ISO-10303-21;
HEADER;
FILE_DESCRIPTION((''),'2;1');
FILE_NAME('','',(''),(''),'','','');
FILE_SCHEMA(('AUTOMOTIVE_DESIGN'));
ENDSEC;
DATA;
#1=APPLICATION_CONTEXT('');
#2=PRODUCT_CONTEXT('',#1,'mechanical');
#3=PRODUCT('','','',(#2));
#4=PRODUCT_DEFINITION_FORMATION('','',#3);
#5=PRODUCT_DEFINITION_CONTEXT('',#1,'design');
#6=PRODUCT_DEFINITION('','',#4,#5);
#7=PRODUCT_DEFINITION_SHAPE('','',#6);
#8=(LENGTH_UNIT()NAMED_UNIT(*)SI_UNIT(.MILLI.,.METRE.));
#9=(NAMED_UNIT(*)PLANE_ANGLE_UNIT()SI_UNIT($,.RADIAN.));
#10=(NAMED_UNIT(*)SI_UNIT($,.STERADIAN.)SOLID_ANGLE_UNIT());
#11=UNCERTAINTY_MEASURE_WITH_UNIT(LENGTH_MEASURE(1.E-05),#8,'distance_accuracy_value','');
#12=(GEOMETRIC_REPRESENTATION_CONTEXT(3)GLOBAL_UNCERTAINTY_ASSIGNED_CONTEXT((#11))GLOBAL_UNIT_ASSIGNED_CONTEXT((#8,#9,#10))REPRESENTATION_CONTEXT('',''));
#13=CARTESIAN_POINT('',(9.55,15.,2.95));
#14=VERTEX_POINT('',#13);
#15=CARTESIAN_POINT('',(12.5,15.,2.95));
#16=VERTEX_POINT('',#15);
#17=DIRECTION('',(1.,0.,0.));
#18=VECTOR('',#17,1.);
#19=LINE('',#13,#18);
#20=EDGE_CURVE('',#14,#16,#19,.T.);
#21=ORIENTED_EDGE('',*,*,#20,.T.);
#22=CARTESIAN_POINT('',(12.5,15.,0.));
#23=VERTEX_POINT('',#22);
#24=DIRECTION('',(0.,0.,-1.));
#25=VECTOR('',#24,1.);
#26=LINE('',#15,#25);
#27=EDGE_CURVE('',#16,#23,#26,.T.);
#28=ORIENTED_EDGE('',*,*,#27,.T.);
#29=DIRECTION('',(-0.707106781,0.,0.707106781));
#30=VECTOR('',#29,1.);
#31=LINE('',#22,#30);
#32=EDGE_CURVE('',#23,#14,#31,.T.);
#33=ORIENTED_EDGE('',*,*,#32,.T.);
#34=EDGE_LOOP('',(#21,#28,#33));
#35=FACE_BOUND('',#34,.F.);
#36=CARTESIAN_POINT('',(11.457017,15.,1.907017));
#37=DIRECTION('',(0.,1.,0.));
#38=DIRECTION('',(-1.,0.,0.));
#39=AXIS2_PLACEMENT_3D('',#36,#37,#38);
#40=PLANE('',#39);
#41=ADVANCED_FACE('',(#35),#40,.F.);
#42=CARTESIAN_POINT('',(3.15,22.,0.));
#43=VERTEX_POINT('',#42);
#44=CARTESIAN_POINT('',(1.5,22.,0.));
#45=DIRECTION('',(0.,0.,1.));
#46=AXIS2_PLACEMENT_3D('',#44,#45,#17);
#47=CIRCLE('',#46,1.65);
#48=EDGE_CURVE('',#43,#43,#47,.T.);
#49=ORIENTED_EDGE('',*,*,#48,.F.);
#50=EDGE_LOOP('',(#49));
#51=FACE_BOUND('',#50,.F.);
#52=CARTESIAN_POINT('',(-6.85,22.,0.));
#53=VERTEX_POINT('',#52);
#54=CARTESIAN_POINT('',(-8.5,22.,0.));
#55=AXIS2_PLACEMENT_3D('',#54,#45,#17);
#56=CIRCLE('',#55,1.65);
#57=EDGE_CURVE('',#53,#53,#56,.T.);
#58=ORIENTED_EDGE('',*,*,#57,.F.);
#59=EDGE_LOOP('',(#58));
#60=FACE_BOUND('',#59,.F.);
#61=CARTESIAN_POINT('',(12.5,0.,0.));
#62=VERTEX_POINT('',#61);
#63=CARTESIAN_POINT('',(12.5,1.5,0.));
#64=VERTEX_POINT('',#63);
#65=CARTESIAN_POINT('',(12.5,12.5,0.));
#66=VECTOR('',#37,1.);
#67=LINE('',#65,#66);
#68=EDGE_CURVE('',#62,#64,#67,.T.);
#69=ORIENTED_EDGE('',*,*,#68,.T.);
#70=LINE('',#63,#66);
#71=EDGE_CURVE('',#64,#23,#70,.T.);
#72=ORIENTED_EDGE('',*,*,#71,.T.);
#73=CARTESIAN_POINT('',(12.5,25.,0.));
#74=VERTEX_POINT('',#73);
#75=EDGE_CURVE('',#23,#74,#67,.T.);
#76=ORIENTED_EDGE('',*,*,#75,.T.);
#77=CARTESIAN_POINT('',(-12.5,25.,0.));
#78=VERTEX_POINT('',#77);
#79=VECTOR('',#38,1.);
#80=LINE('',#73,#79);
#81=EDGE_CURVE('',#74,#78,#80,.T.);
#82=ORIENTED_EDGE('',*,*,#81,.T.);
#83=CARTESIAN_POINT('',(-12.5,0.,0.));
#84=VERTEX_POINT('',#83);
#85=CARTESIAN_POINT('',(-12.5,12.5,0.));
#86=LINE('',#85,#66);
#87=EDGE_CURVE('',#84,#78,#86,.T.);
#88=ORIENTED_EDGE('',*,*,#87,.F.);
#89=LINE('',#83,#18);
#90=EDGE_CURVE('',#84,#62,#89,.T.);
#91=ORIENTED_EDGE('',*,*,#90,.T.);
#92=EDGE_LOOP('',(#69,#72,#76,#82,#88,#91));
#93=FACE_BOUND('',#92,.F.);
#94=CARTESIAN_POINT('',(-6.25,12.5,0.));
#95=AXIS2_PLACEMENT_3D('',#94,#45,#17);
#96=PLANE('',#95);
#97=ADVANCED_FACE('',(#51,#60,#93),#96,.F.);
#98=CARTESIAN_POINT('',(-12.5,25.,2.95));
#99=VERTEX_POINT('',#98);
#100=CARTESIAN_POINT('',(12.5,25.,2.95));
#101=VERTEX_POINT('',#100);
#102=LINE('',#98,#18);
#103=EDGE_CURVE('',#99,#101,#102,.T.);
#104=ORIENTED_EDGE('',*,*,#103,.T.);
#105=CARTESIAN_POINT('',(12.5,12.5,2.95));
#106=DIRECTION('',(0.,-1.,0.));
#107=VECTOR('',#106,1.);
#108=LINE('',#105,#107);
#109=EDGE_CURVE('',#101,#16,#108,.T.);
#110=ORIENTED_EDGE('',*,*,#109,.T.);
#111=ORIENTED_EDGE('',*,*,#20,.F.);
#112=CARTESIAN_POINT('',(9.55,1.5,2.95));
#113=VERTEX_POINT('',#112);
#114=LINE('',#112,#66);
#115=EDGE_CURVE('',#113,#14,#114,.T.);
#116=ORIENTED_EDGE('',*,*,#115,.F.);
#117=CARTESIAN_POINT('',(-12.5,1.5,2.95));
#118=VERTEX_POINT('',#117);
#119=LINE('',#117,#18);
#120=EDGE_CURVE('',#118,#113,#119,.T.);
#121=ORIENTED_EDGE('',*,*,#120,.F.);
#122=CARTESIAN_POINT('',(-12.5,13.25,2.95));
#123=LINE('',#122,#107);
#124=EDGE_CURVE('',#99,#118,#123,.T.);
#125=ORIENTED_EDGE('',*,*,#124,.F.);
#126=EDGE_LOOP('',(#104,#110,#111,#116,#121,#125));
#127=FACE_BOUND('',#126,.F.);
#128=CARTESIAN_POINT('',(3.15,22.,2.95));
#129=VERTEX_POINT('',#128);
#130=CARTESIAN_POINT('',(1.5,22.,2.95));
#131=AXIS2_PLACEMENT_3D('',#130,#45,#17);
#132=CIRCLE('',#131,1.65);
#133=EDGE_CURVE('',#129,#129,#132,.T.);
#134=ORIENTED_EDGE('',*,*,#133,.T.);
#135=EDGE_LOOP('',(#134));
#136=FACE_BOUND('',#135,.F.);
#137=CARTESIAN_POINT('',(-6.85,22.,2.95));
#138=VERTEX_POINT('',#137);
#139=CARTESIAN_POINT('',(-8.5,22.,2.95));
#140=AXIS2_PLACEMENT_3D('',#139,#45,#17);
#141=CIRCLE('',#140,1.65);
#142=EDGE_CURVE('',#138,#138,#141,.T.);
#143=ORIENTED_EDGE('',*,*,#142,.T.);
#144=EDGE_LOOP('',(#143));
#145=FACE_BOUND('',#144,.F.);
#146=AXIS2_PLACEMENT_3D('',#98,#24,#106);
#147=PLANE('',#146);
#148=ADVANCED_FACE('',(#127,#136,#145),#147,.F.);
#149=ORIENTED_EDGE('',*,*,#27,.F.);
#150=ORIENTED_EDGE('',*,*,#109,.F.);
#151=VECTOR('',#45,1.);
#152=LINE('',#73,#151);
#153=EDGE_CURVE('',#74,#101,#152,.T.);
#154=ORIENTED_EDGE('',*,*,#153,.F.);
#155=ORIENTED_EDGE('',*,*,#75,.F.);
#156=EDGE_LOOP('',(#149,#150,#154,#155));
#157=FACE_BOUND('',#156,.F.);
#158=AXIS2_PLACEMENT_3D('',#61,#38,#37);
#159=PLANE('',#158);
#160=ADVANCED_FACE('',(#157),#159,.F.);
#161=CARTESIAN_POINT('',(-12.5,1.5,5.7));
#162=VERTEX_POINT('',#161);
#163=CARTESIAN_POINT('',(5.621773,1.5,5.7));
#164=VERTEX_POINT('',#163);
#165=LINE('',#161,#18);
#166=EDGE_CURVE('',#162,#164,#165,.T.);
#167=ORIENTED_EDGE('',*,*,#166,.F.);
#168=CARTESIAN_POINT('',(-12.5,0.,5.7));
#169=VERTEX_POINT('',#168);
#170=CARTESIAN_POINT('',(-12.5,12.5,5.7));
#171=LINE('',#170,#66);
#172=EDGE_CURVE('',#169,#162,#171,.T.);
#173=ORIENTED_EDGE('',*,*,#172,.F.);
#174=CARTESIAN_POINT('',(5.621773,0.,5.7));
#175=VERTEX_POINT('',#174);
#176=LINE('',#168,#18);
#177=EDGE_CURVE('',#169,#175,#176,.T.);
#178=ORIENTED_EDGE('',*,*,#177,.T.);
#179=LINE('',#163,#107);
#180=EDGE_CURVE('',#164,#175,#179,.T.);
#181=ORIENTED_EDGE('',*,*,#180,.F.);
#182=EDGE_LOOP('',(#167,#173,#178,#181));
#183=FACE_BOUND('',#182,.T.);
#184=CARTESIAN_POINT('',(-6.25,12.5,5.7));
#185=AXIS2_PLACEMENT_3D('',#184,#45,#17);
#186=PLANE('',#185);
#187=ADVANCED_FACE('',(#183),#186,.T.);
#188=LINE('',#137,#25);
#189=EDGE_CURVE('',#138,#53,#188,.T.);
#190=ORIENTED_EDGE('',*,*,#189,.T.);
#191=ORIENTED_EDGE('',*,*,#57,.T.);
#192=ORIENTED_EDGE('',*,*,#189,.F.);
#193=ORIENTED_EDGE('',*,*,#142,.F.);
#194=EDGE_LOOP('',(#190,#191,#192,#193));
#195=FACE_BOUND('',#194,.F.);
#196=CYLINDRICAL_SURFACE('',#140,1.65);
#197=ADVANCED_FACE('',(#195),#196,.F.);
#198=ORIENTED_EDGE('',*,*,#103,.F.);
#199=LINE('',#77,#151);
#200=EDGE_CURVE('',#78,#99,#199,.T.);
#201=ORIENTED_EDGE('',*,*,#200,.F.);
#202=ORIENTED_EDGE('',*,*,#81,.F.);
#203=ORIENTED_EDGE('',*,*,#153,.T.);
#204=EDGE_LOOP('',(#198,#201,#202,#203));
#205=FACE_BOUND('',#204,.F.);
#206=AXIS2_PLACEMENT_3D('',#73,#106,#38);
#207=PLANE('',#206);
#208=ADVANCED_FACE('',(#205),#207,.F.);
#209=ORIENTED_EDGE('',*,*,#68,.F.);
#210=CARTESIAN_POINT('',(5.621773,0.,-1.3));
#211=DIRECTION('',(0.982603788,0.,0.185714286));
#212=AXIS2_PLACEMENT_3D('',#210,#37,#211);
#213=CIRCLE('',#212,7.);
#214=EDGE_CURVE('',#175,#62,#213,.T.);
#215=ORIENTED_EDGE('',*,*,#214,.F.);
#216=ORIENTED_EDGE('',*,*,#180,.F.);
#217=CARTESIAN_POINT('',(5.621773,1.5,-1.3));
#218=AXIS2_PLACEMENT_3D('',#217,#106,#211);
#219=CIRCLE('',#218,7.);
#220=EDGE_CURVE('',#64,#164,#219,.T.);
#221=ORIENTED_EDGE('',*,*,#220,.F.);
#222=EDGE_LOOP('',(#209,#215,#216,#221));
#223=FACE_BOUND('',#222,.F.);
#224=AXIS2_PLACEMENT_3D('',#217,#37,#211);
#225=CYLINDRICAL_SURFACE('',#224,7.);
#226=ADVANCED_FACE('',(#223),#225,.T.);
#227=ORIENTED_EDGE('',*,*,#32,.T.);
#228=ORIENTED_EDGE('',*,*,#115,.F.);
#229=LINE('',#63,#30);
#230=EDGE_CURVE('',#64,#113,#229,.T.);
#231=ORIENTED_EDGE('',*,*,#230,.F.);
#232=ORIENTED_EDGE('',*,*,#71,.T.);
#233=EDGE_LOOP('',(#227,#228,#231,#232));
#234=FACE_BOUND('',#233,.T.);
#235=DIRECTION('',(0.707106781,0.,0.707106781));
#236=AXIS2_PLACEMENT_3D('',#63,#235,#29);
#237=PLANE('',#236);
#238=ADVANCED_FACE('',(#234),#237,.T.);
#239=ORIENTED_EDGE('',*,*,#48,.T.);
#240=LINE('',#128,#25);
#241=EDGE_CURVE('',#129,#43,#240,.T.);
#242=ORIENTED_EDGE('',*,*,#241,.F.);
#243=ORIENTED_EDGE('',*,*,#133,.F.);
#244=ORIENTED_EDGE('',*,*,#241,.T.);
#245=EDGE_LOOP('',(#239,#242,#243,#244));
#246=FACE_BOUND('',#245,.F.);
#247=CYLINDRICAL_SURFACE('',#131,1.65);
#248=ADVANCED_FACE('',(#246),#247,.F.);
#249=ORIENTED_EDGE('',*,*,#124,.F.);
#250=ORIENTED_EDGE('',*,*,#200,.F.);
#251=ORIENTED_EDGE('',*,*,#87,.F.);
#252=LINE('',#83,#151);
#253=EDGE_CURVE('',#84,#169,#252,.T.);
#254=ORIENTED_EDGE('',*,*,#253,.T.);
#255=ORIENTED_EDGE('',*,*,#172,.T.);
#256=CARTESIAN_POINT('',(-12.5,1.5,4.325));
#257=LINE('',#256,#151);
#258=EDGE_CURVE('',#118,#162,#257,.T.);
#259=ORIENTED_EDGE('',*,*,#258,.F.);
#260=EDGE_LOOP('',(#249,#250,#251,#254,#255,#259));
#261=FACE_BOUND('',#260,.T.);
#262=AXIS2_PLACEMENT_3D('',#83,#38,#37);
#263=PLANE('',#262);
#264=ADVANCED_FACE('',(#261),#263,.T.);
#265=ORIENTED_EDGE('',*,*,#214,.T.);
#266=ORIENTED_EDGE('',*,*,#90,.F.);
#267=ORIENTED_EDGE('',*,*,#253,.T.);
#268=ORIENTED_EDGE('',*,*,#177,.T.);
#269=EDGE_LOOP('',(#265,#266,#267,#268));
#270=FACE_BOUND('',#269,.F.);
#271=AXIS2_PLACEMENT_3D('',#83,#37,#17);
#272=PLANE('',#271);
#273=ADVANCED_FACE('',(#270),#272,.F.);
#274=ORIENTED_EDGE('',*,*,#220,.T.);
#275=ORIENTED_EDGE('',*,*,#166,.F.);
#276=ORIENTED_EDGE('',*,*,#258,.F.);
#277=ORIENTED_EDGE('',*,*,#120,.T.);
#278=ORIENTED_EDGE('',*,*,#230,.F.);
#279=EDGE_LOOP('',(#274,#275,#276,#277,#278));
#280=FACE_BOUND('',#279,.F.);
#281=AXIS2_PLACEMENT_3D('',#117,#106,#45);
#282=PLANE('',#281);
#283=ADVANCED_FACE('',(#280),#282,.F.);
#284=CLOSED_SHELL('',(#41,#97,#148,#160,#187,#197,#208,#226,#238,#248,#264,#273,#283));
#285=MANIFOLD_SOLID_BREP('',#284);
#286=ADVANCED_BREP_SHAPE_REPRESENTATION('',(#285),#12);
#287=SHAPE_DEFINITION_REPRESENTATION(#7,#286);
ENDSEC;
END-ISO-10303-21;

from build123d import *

# Parameters (mm, degrees)
F0_W        = 12.5
F0_H        = 25
F1_DEPTH    = 5.7
F2_W        = 23.5
F2_H        = 2.75
F3_DEPTH    = 25.001
F5_DEPTH    = 13.5
F6_T1_DEPTH = 18.695566289
F7_R        = 1.65
F8_DEPTH    = 25


# Not quite as in the source:
# - a fillet or chamfer that OpenCascade refuses, or shapes differently, is made with other operations: its cross-section is extruded or revolved along the edge and cut away or added


with BuildPart() as f1:
    # F0 (on Top) → F1 (new body)
    with BuildSketch(Plane.XY):
        with Locations((-6.25, 12.5)):
            Rectangle(F0_W, F0_H)
        with Locations((6.25, 12.5)):
            Rectangle(F0_W, F0_H)
    extrude(amount=F1_DEPTH)

    # F2 (on face) → F3 (cut, through all)
    with BuildSketch(Plane(origin=(-12.5, 0, 0), x_dir=(0, -1, 0), z_dir=(-1, 0, 0))):
        with Locations((-13.25, 4.325)):
            Rectangle(F2_W, F2_H)
    extrude(amount=-F3_DEPTH, mode=Mode.SUBTRACT)

    # F4 (on face) → F5 (cut)
    with BuildSketch(Plane(origin=(0, 1.5, 0), x_dir=(-1, 0, 0), z_dir=(0, 1, 0))):
        Polygon((-9.55, 2.95), (-12.5, 2.95), (-12.5, 0), align=None)
    extrude(amount=F5_DEPTH, mode=Mode.SUBTRACT)

    # F6: fillet of radius 7 on 1 edges, made by hand

    # F6_s2 → F6_t1 (cut)
    with BuildSketch(Plane.XZ.offset(-1.5)):
        with BuildLine():
            ThreePointArc((12.5, 0), (10.0883157712, 4.0898051913), (5.6217734844, 5.7))
            Line((5.6217734844, 5.7), (12.5, 5.7))
            Line((12.5, 5.7), (12.5, 0))
        make_face()
    extrude(amount=F6_T1_DEPTH, mode=Mode.SUBTRACT)

    # F7 (on face) → F8 (cut)
    with BuildSketch(Plane.XY.offset(2.95)):
        with Locations((-8.5, 22)):
            Circle(F7_R)
        with Locations((1.5, 22)):
            Circle(F7_R)
    extrude(amount=-F8_DEPTH, mode=Mode.SUBTRACT)


solid = f1.part
